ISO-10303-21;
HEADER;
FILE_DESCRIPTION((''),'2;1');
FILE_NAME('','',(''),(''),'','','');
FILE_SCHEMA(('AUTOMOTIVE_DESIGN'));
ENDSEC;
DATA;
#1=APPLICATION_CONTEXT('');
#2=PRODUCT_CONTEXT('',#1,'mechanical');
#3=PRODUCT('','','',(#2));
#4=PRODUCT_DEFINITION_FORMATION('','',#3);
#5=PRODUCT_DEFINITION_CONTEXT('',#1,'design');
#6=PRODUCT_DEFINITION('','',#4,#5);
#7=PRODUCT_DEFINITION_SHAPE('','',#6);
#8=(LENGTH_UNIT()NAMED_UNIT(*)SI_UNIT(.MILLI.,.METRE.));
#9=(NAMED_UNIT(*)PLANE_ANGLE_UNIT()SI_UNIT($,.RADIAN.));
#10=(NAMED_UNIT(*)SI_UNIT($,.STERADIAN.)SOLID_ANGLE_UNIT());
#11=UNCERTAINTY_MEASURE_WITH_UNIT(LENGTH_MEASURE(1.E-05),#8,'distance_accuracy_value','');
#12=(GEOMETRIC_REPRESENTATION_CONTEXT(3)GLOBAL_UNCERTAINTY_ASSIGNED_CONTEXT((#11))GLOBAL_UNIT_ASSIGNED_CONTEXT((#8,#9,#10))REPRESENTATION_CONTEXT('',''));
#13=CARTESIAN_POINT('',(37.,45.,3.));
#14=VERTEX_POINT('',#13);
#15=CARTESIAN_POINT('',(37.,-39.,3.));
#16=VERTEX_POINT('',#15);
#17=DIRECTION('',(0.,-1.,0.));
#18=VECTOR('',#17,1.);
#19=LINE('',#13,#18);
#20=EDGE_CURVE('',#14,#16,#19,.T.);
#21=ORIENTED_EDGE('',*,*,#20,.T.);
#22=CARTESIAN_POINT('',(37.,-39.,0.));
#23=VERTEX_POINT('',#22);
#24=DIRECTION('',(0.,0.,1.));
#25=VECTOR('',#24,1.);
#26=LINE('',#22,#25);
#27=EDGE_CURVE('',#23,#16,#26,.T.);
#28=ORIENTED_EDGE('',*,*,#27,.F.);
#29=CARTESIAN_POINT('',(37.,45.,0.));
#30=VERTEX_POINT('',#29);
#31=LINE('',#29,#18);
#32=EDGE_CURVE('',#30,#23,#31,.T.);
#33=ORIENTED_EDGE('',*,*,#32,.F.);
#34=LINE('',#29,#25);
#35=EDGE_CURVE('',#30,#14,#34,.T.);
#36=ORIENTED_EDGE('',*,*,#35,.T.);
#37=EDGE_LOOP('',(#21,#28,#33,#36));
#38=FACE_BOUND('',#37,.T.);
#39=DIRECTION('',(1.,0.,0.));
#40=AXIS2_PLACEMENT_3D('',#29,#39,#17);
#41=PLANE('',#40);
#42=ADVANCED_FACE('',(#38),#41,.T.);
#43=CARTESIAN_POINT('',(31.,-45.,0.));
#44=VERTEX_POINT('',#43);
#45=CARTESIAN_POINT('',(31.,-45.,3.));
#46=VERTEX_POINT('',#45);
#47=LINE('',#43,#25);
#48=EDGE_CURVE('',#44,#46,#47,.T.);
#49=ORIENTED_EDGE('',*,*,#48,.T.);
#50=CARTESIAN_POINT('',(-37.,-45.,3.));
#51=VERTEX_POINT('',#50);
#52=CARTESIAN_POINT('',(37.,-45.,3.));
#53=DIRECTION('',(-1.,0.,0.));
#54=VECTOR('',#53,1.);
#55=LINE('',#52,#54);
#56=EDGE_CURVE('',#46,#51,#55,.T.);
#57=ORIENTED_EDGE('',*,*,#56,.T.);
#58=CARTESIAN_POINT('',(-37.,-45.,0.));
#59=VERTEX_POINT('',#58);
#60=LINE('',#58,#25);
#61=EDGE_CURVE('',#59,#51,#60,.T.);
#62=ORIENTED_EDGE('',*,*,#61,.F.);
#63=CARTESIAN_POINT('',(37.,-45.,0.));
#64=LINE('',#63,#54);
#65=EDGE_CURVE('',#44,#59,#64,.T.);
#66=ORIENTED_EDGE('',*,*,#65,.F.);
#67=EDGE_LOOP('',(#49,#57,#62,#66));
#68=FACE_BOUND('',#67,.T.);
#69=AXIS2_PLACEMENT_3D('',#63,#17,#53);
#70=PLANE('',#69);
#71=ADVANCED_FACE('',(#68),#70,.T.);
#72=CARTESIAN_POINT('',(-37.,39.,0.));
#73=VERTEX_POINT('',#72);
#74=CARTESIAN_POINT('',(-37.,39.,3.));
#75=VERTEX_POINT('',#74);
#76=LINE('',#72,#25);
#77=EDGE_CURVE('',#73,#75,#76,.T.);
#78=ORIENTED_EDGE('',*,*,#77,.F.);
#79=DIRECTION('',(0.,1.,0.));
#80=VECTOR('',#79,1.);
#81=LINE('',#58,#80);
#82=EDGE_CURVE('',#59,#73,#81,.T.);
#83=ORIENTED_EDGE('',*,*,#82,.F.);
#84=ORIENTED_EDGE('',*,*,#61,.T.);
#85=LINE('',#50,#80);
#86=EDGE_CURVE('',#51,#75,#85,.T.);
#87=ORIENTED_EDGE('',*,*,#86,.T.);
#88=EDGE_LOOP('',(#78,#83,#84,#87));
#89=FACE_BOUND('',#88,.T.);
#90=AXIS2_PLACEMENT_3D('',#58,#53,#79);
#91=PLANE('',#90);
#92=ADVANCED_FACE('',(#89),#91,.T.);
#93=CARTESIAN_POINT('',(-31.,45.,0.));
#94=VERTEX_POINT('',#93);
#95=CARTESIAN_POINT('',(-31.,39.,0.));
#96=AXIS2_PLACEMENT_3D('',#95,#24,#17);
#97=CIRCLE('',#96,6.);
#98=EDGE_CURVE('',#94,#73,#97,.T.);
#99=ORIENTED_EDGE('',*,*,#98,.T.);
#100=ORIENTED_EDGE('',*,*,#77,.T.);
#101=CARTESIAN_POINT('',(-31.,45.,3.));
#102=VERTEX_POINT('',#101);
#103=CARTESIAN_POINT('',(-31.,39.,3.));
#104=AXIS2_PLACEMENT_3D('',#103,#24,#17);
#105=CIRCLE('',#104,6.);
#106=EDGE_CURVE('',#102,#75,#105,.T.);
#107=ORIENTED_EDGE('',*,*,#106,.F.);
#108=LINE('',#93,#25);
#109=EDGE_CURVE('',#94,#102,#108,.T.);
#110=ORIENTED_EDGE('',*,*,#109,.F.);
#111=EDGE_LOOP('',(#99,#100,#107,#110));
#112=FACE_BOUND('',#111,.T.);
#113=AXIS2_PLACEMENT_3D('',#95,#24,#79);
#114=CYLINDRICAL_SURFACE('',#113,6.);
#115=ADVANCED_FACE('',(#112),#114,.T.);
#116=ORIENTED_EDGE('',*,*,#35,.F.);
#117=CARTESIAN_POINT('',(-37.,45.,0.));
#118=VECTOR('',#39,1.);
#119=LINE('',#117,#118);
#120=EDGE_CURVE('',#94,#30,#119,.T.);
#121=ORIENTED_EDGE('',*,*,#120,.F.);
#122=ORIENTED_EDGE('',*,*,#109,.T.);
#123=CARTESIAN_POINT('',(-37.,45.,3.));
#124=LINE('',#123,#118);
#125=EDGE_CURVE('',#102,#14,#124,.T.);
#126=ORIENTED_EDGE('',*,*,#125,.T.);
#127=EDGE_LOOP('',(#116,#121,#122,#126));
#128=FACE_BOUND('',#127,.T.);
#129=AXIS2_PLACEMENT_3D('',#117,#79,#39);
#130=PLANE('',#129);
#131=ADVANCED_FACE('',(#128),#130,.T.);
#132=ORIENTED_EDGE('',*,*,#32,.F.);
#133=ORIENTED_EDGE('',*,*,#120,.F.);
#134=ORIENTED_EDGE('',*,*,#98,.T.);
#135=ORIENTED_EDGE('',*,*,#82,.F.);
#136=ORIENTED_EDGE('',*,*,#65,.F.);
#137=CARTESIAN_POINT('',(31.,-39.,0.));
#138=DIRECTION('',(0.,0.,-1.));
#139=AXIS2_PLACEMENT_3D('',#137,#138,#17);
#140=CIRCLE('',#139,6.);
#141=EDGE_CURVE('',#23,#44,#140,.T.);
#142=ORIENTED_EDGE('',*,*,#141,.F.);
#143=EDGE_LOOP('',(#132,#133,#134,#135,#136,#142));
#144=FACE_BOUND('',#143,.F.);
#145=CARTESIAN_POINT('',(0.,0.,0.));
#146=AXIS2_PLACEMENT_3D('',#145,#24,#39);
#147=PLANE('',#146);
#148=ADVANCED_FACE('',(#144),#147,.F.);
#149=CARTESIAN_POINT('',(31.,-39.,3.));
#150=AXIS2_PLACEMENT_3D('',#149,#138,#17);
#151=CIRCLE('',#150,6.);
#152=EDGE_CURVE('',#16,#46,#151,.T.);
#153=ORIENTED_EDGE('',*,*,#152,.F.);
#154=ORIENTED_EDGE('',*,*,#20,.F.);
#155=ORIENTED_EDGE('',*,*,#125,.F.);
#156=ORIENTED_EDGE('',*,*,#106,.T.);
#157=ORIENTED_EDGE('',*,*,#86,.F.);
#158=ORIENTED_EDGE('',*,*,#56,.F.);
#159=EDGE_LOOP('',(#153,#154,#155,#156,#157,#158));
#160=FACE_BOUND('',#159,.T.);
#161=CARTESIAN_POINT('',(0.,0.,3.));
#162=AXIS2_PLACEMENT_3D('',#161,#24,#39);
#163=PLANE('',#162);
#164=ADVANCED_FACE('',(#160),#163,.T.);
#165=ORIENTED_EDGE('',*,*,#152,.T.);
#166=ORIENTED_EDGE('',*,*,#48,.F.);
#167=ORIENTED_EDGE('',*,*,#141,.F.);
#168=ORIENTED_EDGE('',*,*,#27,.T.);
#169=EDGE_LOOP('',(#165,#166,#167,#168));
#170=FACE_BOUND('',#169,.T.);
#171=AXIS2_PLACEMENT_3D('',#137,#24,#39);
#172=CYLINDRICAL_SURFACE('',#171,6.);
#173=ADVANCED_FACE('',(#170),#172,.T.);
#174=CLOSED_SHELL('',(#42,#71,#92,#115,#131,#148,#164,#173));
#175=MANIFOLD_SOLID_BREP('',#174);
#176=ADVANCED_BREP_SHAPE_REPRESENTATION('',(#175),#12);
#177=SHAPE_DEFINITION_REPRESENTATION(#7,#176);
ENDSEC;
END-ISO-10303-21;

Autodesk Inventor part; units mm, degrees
ref_plane "YZ Plane" through (0, 0, 0) normal (1, 0, 0) x (0, 1, 0)
ref_plane "XZ Plane" through (0, 0, 0) normal (0, 1, 0) x (-1, 0, 0)
ref_plane "XY Plane" through (0, 0, 0) normal (0, 0, 1) x (1, 0, 0)
sketch "Sketch1" plane through (0, 0, 0) normal (0, 0, 1) x (1, 0, 0)
  line L0 (-37, 45) -> (37, 45)
  line L1 (37, 45) -> (37, -45)
  line L2 (37, -45) -> (-37, -45)
  line L3 (-37, -45) -> (-37, 45)
  line L4 (-37, 45) -> (37, -45) construction
  point P0 (0, 0)
  point P1 (0, 0)
  dimension "d0" = 74
  dimension "d1" = 90
extrude "Plate1" add sketch "Sketch1" along normal blind 3
fillet "Corner Round2" radius 6 2 edges at (37, -45, 1.5) (-37, 45, 1.5)
equation "\"d2\" = Thickness"
equation "\"BendReliefWidth\" = Thickness"
equation "\"BendReliefDepth\" = 0.5 * Thickness"
equation "\"CornerReliefSize\" = 4 * Thickness"
equation "\"MinimumRemnant\" = 2 * Thickness"
equation "\"TransitionRadius\" = BendRadius"
equation "\"JacobiRadiusSize\" = BendRadius"
equation "\"GapSize\" = Thickness"
equation "\"Thickness\" = 3"
equation "\"BendRadius\" = 5"
properties part number "DSB-104 ridge end cap" material "Stainless Steel"
